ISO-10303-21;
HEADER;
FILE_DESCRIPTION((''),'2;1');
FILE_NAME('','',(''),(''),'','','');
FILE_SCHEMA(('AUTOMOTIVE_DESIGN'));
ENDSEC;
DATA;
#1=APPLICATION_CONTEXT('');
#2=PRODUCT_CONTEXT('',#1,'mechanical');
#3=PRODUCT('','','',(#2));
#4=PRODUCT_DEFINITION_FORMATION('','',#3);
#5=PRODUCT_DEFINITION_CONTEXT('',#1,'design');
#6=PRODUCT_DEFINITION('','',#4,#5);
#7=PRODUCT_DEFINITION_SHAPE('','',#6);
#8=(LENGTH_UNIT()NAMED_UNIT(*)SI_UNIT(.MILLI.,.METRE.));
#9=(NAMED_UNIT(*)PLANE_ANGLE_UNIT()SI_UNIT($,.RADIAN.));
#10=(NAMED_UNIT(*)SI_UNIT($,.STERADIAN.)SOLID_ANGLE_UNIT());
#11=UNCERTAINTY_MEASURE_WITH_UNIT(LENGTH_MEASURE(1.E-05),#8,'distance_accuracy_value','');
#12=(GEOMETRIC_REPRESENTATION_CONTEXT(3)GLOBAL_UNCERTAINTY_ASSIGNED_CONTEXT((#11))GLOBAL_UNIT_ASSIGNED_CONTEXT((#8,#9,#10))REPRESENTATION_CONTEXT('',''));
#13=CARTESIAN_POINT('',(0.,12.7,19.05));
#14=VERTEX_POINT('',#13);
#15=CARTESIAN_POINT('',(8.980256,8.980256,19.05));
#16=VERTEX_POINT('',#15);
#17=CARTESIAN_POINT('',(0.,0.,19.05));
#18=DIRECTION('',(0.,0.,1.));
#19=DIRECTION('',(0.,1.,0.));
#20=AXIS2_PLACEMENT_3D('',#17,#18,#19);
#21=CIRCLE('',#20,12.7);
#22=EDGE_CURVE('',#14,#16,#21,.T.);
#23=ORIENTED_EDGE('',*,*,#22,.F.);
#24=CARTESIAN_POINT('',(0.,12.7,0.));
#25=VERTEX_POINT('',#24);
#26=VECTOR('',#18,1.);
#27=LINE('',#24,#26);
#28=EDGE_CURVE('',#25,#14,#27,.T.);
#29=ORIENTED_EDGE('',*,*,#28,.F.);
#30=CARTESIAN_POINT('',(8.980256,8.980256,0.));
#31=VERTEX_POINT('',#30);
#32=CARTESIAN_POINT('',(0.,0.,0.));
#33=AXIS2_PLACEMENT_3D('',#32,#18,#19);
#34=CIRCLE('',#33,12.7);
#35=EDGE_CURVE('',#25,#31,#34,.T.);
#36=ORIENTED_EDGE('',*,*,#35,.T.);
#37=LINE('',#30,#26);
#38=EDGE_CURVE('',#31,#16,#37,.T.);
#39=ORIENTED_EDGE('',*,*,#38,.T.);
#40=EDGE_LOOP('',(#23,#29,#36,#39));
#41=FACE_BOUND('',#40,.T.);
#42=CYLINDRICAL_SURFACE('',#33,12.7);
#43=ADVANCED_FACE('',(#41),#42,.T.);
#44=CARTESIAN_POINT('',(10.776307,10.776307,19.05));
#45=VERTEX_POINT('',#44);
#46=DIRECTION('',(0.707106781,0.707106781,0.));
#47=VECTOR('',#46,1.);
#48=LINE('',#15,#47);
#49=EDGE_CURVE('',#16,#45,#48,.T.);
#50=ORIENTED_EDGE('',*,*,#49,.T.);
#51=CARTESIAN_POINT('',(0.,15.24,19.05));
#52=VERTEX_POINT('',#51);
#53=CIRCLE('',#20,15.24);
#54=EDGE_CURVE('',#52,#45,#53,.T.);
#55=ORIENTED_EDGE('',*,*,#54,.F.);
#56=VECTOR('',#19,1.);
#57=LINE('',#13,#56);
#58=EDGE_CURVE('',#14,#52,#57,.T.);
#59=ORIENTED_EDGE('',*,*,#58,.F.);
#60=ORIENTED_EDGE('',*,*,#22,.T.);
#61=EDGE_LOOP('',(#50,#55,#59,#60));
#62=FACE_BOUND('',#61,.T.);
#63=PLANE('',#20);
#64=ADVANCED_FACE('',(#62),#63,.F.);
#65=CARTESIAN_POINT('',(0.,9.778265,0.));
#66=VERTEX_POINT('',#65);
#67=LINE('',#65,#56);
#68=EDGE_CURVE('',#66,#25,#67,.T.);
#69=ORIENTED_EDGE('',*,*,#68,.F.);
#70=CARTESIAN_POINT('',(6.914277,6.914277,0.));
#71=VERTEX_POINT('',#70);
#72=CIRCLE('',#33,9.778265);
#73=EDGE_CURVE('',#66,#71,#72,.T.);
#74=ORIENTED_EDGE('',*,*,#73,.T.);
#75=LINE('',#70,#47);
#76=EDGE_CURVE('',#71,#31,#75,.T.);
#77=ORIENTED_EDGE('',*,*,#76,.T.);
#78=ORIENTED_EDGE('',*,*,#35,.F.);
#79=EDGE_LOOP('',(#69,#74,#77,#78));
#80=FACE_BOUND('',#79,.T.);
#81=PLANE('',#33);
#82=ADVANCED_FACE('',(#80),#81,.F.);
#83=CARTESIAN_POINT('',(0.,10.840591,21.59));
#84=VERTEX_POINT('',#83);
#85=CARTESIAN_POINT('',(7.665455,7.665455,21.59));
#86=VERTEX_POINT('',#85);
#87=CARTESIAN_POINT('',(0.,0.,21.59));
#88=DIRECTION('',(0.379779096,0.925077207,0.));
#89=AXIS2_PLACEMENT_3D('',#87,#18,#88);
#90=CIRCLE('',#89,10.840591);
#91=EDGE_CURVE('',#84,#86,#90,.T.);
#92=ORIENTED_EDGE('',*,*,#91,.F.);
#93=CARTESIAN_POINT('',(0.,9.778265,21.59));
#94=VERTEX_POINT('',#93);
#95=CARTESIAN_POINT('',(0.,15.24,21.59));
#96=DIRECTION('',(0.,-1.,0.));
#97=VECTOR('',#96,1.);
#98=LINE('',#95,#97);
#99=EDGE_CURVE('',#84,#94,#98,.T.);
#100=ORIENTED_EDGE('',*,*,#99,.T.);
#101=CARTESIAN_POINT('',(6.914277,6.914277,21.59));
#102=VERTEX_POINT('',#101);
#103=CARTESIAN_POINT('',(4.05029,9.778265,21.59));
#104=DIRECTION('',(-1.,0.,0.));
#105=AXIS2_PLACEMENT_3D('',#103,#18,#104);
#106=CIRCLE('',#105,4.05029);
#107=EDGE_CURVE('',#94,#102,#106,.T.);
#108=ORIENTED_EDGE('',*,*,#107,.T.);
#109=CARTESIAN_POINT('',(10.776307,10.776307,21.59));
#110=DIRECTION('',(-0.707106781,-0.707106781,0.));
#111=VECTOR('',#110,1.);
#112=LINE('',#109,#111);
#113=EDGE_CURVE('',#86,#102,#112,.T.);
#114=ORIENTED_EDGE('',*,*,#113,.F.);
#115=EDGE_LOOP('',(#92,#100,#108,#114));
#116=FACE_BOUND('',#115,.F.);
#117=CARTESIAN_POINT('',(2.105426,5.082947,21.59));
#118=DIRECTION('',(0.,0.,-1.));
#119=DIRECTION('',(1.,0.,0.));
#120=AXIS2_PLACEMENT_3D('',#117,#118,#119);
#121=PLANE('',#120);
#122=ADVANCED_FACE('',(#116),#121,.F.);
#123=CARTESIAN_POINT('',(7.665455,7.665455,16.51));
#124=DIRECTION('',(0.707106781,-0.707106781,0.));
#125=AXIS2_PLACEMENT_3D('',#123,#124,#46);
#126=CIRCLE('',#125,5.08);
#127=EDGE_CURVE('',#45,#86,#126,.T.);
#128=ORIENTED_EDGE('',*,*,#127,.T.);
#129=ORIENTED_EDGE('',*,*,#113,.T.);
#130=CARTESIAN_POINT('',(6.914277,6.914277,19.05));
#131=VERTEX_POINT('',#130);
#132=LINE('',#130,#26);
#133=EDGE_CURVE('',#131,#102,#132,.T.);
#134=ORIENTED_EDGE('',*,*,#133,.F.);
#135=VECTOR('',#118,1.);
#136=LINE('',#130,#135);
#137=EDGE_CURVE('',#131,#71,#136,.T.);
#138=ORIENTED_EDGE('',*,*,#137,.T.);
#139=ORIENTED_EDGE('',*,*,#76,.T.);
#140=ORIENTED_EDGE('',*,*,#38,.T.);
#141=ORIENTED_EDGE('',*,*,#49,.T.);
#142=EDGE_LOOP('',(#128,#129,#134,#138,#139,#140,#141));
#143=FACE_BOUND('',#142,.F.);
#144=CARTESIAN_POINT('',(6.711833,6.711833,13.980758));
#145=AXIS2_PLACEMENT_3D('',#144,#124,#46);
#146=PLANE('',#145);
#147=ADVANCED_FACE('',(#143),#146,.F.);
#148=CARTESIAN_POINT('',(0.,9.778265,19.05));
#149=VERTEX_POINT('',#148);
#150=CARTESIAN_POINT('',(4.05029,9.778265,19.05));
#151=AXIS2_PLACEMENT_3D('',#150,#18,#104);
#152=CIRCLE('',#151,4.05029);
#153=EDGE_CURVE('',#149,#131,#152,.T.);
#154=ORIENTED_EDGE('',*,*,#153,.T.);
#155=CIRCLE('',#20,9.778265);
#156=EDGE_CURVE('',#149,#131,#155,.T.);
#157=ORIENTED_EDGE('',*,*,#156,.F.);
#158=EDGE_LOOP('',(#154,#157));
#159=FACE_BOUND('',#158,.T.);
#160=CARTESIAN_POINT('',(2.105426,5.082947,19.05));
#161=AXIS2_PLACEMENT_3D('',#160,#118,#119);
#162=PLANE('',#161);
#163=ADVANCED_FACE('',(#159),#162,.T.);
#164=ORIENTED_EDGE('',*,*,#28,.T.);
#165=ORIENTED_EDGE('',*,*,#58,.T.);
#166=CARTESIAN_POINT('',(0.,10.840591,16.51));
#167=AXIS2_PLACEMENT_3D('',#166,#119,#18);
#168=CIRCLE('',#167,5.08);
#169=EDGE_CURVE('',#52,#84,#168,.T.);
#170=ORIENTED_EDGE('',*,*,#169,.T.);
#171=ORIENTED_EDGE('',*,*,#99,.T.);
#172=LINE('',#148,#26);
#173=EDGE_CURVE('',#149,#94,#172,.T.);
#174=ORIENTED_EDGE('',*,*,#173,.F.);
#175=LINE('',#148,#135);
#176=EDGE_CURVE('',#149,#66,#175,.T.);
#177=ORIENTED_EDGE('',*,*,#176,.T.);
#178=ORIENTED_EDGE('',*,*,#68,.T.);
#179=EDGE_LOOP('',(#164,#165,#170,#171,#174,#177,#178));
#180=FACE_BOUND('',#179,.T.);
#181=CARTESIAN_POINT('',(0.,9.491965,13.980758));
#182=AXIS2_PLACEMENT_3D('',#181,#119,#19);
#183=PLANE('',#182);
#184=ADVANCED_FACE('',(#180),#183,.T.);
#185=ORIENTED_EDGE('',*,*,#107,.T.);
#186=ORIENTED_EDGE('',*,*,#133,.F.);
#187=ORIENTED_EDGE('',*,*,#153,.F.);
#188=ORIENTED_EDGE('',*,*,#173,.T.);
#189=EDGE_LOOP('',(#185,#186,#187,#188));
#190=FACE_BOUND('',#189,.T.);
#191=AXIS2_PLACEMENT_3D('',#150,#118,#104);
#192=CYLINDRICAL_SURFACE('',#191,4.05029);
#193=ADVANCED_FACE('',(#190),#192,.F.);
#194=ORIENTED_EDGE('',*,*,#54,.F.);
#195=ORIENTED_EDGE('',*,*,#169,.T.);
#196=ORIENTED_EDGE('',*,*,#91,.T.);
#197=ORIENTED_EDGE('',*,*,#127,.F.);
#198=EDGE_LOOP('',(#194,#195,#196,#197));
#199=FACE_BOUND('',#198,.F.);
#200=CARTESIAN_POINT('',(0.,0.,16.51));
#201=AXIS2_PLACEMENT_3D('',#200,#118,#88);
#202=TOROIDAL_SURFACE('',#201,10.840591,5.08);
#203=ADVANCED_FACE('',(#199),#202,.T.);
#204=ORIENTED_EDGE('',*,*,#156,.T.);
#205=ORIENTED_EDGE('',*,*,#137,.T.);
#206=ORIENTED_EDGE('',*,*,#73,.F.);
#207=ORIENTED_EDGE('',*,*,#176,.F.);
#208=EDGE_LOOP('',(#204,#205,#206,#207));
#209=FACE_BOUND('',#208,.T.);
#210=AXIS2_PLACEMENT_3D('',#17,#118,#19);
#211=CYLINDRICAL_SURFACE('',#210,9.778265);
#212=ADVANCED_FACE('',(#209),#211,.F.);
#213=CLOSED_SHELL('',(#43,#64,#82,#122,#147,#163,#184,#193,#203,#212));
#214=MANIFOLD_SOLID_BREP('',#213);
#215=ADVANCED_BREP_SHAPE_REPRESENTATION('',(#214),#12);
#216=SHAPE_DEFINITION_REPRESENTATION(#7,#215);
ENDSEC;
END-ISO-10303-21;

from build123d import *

# Parameters (mm, degrees)
F1_ANGLE    = 315
F2_T2_ANGLE = 359.64
F4_DEPTH    = 2.54


# Not quite as in the source:
# - a fillet or chamfer that OpenCascade refuses, or shapes differently, is made with other operations: its cross-section is extruded or revolved along the edge and cut away or added


with BuildPart() as f1:
    # F0 (on Right) → F1 (revolve)
    with BuildSketch(Plane.YZ):
        Polygon((15.24, 21.59), (0, 21.59), (0, 19.05), (9.7782645518, 19.05), (9.7782645518, 0), (12.7, 0), (12.7, 19.05), (15.24, 19.05), align=None)
    revolve(axis=Axis((0, 0, 20.32), (0, 0, 1)), revolution_arc=F1_ANGLE)

    # F2: fillet of radius 5.08 on 1 edges, made by hand

    # F2_s1 → F2_t2 (revolve, cut)
    with BuildSketch(Plane(origin=(0, 0, 0), x_dir=(0, 0, 1), z_dir=(0.9250772068, -0.3797790955, 0))):
        with BuildLine():
            ThreePointArc((21.59, -10.8405909488), (20.9094090512, -13.3805909488), (19.05, -15.24))
            Line((19.05, -15.24), (21.59, -15.24))
            Line((21.59, -15.24), (21.59, -10.8405909488))
        make_face()
    revolve(axis=Axis((0, 0, 21.59), (0, 0, 1)), revolution_arc=F2_T2_ANGLE, mode=Mode.SUBTRACT)

    # F3 (on face) → F4 (join)
    with BuildSketch(Plane(origin=(0, 0, 19.05), x_dir=(1, 0, 0), z_dir=(0, 0, -1))):
        with BuildLine():
            ThreePointArc((0, -9.7782645518), (2.5003109935, -6.0362847106), (6.9142771728, -6.9142771728))
            Line((6.9142771728, -6.9142771728), (0, 0))
            Line((0, 0), (0, -9.7782645518))
        make_face()
    extrude(amount=-F4_DEPTH)


solid = f1.part
